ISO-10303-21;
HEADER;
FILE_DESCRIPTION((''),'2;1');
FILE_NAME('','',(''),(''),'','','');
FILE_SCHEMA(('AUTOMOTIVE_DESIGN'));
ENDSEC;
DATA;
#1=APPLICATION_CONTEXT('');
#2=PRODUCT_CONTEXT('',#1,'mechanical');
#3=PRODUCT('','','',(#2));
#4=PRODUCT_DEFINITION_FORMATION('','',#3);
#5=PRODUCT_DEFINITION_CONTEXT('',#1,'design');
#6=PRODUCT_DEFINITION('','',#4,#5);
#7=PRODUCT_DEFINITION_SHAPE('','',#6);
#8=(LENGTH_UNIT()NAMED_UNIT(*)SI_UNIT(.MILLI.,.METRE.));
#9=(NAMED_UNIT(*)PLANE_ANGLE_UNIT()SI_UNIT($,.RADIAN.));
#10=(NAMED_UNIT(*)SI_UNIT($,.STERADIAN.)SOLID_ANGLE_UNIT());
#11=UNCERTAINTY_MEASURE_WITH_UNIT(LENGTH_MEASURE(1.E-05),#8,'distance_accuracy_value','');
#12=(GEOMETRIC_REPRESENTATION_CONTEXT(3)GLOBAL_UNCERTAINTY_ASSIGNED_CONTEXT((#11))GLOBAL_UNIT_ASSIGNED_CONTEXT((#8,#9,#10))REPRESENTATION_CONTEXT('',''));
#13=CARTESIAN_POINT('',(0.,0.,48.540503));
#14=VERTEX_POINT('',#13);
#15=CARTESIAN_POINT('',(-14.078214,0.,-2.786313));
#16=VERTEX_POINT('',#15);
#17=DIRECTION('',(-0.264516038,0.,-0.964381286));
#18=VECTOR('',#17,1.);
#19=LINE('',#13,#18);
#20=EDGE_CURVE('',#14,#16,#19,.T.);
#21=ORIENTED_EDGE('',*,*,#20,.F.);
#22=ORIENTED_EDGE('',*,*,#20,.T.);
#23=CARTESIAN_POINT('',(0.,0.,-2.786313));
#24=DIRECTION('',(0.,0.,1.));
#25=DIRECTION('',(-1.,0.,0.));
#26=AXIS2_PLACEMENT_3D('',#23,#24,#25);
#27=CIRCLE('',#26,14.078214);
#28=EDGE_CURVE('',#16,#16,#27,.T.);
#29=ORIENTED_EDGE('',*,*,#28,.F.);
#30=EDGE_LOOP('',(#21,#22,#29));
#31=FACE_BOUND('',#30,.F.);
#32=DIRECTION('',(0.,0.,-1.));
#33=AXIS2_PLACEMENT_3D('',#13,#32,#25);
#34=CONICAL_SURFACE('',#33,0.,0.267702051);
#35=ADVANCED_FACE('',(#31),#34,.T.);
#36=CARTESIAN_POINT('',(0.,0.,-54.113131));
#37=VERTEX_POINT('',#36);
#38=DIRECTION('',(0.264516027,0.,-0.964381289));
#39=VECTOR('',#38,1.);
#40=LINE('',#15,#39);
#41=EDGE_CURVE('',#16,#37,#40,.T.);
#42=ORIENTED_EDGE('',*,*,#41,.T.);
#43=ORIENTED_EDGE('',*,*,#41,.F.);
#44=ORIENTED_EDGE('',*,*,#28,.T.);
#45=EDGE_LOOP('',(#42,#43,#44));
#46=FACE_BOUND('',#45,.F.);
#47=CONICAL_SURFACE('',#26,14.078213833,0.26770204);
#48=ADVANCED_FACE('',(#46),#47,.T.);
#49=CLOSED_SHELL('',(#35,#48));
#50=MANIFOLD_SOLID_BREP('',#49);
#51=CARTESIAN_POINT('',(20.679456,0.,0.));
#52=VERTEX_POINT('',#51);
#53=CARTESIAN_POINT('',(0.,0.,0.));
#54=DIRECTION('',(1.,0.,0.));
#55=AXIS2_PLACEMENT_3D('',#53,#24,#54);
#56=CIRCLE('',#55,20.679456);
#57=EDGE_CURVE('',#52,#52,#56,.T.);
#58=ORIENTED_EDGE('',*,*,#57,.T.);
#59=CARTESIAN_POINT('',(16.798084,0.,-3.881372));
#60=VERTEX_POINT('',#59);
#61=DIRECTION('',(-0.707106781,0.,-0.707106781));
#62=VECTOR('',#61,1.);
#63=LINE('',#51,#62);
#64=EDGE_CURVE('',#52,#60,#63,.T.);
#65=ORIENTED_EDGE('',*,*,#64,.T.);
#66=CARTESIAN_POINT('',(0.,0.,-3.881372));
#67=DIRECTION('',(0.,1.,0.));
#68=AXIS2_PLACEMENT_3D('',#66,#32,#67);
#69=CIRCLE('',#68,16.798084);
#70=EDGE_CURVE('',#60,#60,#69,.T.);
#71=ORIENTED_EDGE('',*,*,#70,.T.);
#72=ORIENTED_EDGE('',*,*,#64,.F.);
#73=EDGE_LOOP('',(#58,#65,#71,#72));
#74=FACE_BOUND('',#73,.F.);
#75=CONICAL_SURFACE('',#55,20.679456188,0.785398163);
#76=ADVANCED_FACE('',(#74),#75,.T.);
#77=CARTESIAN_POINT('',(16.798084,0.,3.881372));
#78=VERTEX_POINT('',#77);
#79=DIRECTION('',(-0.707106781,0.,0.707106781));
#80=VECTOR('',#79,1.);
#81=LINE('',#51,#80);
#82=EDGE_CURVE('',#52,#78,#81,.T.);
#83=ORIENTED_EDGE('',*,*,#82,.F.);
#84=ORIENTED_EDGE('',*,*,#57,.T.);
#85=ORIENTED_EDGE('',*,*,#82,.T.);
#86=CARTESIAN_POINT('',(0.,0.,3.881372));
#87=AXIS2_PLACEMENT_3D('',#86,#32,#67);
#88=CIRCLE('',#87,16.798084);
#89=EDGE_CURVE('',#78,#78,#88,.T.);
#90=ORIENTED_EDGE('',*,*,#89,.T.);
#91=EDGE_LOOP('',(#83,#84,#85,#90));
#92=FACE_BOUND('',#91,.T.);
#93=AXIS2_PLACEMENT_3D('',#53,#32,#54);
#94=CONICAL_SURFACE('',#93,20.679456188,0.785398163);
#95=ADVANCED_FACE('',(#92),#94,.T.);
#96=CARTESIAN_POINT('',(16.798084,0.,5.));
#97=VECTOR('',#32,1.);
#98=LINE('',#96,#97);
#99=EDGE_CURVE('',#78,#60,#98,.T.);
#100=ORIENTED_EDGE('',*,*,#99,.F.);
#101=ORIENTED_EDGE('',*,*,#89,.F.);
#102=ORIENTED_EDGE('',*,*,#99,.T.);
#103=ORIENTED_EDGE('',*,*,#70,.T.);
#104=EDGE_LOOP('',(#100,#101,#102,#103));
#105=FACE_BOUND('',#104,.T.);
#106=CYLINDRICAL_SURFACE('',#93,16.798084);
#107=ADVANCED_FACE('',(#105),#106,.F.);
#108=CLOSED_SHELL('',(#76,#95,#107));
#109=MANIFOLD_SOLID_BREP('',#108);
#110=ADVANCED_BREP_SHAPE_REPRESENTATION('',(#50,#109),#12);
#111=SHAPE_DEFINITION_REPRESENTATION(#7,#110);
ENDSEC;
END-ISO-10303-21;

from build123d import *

# Parameters (mm, degrees)
F2_R     = 20.6794561875
F2_R_2   = 16.7980837362
F3_DEPTH = 5


# Not quite as in the source:
# - a fillet or chamfer that OpenCascade refuses, or shapes differently, is made with other operations: its cross-section is extruded or revolved along the edge and cut away or added


with BuildPart() as f1:
    # F0 (on Front) → F1 (revolve)
    with BuildSketch(Plane.XZ):
        Polygon((0, -54.1131310165), (0, 48.5405027866), (-14.0782138333, -2.7863129508), align=None)
    revolve(axis=Axis((0, 0, -2.7863141149), (0, 0, 1)))


with BuildPart() as f3:
    # F2 (on Top) → F3 (new body, symmetric)
    with BuildSketch(Plane.XY):
        Circle(F2_R)
        Circle(F2_R_2, mode=Mode.SUBTRACT)
    extrude(amount=F3_DEPTH, both=True)

    # F4: chamfer of 5 on 2 edges, made by hand

    # F4_s1 → F4_t2 (revolve, cut)
    with BuildSketch(Plane.XZ):
        Polygon((20.6794561875, 0), (15.6794561875, 5), (20.6794561875, 5), align=None)
    revolve(axis=Axis((0, 0, 5), (0, 0, 1)), mode=Mode.SUBTRACT)

    # F4_s3 → F4_t4 (revolve, cut)
    with BuildSketch(Plane.XZ):
        Polygon((20.6794561875, 0), (15.6794561875, -5), (20.6794561875, -5), align=None)
    revolve(axis=Axis((0, 0, -5), (0, 0, 1)), mode=Mode.SUBTRACT)


solid = Compound([f1.part, f3.part])
